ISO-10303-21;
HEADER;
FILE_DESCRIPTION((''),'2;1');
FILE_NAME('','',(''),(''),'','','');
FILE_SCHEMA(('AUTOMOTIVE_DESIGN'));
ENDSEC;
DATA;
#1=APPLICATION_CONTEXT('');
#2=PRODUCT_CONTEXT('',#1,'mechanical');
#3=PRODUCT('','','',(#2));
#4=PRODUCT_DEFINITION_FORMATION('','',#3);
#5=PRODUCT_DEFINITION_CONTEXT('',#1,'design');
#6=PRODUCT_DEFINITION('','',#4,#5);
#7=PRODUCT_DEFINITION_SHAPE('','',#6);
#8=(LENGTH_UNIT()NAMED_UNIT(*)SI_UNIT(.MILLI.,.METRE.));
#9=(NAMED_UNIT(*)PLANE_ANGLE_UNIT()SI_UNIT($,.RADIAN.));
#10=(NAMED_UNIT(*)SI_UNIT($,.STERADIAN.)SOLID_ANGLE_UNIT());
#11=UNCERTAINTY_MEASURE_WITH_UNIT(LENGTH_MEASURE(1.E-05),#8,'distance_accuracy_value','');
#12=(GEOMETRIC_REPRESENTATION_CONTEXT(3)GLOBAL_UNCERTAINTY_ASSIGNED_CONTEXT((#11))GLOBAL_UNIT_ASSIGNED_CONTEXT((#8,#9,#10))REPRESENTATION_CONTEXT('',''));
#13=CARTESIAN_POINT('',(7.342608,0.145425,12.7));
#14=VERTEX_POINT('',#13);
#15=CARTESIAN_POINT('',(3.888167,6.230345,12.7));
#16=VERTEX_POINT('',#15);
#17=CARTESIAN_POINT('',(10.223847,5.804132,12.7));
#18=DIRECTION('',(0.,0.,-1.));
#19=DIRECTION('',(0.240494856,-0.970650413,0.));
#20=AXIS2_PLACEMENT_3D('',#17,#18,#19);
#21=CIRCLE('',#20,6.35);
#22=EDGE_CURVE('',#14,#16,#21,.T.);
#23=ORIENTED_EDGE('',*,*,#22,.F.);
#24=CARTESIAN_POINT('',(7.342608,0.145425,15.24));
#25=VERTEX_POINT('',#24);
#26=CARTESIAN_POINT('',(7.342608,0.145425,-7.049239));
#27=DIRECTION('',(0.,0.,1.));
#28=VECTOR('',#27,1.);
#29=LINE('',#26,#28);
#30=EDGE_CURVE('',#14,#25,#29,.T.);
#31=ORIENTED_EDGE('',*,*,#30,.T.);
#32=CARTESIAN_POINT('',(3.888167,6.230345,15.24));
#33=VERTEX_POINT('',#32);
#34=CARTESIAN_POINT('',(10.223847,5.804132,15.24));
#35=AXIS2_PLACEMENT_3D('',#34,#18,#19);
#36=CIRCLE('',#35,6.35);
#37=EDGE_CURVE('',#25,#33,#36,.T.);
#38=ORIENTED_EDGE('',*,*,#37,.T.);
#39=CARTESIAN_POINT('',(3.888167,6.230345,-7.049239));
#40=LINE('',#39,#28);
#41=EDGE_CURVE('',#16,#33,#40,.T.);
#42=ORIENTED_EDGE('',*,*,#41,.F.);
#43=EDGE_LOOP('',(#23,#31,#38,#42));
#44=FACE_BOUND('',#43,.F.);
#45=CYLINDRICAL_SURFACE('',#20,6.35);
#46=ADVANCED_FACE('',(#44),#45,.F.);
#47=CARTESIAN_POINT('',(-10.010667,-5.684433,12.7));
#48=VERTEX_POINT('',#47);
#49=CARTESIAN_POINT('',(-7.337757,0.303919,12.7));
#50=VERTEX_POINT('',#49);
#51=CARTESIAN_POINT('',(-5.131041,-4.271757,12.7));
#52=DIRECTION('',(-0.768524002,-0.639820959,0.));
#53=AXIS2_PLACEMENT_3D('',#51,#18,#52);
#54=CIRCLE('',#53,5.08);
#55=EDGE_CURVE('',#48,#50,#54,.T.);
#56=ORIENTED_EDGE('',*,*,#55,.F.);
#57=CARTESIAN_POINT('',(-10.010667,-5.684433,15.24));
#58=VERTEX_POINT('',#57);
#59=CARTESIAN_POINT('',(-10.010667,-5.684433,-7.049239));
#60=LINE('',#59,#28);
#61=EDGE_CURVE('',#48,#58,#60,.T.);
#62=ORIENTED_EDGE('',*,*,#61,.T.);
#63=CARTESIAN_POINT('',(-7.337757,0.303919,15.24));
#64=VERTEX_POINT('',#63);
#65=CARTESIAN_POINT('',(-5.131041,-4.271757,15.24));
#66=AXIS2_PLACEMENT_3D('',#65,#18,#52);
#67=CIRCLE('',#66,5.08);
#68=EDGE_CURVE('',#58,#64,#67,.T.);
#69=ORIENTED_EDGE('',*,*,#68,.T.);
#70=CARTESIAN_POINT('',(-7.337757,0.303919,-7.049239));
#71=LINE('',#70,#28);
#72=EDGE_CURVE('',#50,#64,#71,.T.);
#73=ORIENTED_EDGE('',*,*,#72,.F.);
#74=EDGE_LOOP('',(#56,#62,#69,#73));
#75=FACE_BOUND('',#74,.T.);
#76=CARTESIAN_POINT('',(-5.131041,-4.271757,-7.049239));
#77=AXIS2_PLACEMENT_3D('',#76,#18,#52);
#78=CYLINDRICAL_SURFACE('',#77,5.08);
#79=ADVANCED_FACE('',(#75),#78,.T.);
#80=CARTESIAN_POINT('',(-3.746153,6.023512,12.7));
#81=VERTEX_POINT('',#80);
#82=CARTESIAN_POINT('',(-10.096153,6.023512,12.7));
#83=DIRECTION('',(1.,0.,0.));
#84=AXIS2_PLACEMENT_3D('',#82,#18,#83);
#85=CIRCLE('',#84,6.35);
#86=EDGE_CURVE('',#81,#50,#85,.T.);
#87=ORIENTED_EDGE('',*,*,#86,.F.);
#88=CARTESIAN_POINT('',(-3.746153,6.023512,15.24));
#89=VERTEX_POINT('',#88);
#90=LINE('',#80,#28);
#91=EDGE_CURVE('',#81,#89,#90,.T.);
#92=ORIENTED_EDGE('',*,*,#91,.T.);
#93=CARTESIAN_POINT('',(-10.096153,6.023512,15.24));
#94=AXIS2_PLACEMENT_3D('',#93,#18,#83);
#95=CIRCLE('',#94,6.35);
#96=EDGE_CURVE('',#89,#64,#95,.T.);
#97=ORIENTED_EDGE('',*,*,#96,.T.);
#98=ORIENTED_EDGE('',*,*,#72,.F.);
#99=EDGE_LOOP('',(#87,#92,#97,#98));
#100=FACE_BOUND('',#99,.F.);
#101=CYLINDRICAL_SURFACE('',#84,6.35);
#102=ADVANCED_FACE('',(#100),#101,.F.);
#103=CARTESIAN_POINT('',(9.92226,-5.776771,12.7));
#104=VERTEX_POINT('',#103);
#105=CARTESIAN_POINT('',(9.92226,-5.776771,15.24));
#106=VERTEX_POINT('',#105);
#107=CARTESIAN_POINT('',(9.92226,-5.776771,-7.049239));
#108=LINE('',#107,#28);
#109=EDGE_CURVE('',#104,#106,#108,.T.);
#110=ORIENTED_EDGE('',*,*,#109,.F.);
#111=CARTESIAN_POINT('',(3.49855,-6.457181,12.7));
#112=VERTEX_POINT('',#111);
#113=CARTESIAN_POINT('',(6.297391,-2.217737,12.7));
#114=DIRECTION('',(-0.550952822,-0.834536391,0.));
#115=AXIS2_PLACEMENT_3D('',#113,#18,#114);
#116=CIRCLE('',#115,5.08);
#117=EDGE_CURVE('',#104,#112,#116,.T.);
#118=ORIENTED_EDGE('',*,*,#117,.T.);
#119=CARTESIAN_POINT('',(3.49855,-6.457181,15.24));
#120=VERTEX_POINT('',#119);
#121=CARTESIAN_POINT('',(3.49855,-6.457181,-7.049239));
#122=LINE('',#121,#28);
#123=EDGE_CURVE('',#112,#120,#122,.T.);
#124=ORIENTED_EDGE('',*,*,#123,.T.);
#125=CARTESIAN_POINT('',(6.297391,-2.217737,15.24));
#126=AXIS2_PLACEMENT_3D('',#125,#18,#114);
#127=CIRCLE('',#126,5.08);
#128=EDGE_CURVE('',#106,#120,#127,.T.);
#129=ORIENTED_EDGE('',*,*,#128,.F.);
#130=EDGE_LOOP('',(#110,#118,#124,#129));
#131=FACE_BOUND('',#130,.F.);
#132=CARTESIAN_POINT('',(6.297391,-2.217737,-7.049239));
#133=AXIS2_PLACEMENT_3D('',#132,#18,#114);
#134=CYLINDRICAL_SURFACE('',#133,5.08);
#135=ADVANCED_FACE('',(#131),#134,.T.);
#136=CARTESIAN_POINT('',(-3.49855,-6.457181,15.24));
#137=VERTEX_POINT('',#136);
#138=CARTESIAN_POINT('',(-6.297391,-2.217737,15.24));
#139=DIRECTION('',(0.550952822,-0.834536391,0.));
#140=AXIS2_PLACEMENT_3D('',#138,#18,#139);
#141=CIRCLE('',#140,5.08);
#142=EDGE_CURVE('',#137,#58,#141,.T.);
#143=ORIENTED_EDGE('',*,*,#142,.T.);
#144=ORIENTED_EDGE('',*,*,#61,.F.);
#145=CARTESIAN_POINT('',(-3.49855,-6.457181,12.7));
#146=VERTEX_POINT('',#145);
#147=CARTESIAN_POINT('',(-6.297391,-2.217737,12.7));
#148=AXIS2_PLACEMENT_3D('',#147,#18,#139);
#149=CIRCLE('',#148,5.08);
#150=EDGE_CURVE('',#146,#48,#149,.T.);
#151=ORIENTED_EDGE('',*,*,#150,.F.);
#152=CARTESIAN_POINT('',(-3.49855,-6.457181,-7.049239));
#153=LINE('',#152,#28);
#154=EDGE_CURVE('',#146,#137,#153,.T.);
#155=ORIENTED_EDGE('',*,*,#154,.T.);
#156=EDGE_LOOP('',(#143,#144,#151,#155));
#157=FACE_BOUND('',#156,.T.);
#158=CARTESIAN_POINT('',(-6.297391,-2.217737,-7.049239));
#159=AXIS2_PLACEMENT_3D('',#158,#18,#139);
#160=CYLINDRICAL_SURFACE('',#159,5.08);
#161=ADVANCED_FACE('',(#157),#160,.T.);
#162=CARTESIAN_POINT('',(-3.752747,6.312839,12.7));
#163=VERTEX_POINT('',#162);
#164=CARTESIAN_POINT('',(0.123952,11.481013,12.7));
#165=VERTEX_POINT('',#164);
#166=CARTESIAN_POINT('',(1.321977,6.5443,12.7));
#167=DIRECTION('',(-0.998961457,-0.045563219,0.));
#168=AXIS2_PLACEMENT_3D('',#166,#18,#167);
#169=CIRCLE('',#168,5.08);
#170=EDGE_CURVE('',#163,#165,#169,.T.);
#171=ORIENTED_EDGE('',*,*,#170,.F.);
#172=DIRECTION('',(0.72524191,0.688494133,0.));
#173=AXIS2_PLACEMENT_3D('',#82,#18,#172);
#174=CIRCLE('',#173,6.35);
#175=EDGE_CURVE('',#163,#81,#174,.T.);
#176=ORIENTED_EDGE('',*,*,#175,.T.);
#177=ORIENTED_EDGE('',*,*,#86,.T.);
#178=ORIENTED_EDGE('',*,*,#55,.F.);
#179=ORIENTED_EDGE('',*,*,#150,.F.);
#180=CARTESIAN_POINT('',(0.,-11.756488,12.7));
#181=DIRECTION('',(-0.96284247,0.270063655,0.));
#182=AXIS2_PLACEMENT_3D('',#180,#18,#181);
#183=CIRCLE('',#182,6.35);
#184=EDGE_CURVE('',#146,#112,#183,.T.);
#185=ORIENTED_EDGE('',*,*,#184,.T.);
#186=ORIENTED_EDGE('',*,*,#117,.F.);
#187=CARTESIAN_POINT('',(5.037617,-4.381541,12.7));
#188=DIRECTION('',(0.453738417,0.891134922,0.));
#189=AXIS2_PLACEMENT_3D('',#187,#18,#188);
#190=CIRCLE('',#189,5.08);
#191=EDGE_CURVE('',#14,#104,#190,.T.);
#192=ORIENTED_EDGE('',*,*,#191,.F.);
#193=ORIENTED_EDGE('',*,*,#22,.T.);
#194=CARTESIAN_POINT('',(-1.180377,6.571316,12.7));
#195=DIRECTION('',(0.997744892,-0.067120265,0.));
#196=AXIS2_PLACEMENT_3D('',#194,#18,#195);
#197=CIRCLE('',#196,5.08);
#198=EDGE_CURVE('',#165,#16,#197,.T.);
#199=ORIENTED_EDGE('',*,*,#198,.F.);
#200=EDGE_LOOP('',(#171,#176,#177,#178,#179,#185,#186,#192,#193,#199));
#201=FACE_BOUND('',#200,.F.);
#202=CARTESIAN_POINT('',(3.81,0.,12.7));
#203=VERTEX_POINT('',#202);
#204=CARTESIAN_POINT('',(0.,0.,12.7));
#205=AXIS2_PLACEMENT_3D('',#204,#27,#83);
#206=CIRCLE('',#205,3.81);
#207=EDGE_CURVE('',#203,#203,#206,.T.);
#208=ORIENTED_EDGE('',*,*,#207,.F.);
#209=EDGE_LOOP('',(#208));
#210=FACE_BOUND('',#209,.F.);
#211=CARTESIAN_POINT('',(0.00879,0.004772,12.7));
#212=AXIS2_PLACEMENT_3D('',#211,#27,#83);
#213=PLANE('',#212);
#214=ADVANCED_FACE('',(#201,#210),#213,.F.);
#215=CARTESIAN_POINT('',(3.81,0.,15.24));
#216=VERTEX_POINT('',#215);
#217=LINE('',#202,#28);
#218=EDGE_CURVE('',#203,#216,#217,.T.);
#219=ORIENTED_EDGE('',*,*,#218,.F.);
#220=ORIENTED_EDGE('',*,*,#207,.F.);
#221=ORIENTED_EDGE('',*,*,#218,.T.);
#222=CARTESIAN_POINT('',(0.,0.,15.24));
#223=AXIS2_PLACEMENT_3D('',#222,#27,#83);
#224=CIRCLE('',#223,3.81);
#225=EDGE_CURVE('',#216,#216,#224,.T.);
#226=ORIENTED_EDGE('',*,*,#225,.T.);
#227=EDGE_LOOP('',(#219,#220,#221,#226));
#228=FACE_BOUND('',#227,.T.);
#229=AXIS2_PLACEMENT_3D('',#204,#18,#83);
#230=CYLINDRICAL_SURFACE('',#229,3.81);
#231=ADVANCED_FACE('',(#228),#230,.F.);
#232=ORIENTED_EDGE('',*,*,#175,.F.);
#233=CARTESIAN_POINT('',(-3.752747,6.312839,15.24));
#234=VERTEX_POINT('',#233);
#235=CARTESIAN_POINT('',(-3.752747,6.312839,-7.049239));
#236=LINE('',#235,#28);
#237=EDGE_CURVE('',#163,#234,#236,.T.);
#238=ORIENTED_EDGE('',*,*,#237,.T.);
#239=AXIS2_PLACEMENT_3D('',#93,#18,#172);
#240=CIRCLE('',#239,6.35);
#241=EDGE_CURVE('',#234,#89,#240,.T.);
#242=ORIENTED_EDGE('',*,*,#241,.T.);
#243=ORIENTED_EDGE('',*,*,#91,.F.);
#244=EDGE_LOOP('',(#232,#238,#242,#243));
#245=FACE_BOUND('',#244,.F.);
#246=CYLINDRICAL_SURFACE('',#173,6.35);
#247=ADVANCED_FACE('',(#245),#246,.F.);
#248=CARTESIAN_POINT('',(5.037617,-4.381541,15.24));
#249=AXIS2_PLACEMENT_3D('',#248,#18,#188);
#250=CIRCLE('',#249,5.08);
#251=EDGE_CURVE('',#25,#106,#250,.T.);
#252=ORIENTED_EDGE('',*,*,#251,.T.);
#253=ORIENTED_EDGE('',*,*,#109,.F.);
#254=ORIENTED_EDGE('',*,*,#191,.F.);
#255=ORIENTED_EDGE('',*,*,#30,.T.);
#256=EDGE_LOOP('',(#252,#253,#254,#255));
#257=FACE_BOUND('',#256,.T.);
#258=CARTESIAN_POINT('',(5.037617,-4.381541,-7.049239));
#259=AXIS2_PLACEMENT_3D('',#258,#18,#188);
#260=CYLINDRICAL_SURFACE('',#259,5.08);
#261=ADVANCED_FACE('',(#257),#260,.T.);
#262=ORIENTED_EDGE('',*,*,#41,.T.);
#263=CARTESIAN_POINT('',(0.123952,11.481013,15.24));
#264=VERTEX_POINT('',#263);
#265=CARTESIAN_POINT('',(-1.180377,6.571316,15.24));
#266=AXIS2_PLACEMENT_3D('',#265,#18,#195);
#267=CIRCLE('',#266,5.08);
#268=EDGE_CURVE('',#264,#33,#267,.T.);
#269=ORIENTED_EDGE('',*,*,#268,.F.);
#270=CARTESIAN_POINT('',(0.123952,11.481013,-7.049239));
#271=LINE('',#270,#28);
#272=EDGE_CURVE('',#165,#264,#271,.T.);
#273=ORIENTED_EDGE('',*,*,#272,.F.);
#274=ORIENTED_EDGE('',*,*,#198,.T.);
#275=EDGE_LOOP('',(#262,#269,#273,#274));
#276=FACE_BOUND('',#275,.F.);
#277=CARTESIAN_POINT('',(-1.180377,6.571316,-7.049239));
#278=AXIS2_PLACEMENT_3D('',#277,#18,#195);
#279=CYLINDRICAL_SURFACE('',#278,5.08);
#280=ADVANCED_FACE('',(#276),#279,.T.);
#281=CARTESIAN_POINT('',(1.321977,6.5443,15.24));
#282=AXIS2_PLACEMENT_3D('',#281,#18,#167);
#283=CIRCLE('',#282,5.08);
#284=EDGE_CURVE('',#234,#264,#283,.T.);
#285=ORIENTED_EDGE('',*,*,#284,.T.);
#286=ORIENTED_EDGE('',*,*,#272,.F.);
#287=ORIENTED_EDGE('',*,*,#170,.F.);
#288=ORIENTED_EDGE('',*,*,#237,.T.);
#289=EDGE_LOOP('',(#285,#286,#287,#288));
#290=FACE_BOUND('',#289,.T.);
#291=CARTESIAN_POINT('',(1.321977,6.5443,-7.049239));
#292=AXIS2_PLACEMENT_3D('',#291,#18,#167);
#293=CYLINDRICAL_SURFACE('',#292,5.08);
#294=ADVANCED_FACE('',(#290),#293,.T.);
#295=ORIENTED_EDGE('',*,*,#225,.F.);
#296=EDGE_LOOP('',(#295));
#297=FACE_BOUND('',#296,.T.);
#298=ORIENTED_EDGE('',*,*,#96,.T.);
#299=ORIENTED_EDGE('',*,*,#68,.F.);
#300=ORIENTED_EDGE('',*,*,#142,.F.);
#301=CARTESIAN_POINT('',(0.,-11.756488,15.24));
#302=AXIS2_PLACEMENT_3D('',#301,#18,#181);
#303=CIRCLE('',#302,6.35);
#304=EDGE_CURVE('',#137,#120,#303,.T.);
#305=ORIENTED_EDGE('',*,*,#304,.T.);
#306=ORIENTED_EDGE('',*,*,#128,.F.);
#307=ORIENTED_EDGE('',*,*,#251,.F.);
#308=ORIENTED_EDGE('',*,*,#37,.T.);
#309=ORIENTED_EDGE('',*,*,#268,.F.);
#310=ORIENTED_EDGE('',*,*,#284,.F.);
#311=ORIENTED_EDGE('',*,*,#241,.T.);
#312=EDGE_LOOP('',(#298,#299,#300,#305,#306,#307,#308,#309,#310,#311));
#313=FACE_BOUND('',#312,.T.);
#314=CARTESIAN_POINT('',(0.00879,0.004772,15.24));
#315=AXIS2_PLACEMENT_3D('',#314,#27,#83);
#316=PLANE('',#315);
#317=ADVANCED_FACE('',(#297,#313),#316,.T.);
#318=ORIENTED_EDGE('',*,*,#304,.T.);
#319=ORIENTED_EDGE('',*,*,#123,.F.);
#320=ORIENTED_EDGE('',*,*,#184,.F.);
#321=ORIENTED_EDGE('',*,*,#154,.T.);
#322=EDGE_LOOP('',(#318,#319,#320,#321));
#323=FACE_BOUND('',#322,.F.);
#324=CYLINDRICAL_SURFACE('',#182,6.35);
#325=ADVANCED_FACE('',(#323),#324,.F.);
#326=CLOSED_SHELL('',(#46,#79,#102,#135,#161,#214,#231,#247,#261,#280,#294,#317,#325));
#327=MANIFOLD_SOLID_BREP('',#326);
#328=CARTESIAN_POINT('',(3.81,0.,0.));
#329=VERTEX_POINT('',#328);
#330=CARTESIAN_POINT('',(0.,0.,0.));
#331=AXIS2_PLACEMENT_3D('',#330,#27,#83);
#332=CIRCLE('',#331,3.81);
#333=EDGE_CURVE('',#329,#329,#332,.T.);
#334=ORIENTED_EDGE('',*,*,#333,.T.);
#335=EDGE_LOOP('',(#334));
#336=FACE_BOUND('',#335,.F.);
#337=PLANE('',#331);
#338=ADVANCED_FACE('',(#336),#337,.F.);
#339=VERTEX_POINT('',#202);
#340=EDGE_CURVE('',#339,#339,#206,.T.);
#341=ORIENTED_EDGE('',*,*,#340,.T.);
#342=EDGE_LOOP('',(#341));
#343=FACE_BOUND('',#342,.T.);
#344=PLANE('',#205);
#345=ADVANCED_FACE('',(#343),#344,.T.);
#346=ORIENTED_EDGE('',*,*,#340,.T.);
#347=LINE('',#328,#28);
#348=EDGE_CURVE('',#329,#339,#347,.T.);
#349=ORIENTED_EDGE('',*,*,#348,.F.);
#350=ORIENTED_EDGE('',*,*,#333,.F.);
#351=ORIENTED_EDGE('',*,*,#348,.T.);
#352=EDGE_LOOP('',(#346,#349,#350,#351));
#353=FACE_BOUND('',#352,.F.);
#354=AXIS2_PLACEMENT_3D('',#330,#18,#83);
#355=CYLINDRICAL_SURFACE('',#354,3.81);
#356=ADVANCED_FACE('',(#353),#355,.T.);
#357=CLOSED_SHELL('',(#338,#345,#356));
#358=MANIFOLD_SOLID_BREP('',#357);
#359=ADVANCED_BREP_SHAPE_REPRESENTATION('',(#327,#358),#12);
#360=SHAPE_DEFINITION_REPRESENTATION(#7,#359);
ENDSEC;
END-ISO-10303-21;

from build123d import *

# Parameters (mm, degrees)
F0_R        = 3.81
F1_DEPTH    = 12.7
F2_R        = 3.81
F3_DEPTH    = 2.54
F4_T1_DEPTH = 42.0384776465


# Not quite as in the source:
# - a fillet or chamfer that OpenCascade refuses, or shapes differently, is made with other operations: its cross-section is extruded or revolved along the edge and cut away or added


with BuildPart() as f1:
    # F0 (on Top) → F1 (new body)
    with BuildSketch(Plane.XY):
        Circle(F0_R)
    extrude(amount=F1_DEPTH)


with BuildPart() as f3:
    # F2 (on face) → F3 (new body)
    with BuildSketch(Plane.XY.offset(12.7)):
        with BuildLine():
            ThreePointArc((11.7509897523, -0.35949854), (4.7016682053, 2.6691615996), (5.7140252702, 10.274478798))
            ThreePointArc((5.7140252702, 10.274478798), (0.1269192039, 11.7558024343), (-5.4908664559, 10.3954502029))
            ThreePointArc((-5.4908664559, 10.3954502029), (-4.1984383287, 8.3771195895), (-3.7461525862, 6.0235124566))
            ThreePointArc((-3.7461525862, 6.0235124566), (-6.2372414103, 0.980566439), (-11.7560122827, -0.1057098259))
            ThreePointArc((-11.7560122827, -0.1057098259), (-10.2232663206, -5.8051550451), (-6.1140496846, -10.041583332))
            ThreePointArc((-6.1140496846, -10.041583332), (0, -5.4064875434), (6.1140496846, -10.041583332))
            ThreePointArc((6.1140496846, -10.041583332), (10.16, -5.9151837975), (11.7509897523, -0.35949854))
        make_face()
        Circle(F2_R, mode=Mode.SUBTRACT)
    extrude(amount=F3_DEPTH)

    # F4: fillet of radius 5.08 on 6 edges, made by hand

    # F4_s2 → F4_t1 (cut)
    with BuildSketch(Plane.XY.offset(-7.0492388233)):
        with BuildLine():
            ThreePointArc((7.3426084647, 0.1454248286), (10.0242781389, -3.4122038252), (8.8706351528, -7.7153633319))
            ThreePointArc((8.8706351528, -7.7153633319), (10.9471475801, -4.2866022929), (11.7509897523, -0.35949854))
            ThreePointArc((11.7509897523, -0.35949854), (9.5012608724, -0.5046217571), (7.3426084647, 0.1454248286))
        make_face()
        with BuildLine():
            ThreePointArc((3.888167348, 6.230345265), (2.2077692466, 10.3564010208), (-2.0785006989, 11.5712935406))
            ThreePointArc((-2.0785006989, 11.5712935406), (1.9299460735, 11.5969956244), (5.7140252702, 10.274478798))
            ThreePointArc((5.7140252702, 10.274478798), (4.4363623338, 8.4170832554), (3.888167348, 6.230345265))
        make_face()
        with BuildLine():
            ThreePointArc((-3.7527473325, 6.3128388943), (-1.9836590084, 10.4016529498), (2.3278414748, 11.5237213359))
            ThreePointArc((2.3278414748, 11.5237213359), (-1.6791160458, 11.6359601522), (-5.4908664559, 10.3954502029))
            ThreePointArc((-5.4908664559, 10.3954502029), (-4.2536026695, 8.5109027497), (-3.7527473325, 6.3128388943))
        make_face()
        with BuildLine():
            ThreePointArc((-9.0351428515, -7.522047129), (-10.0956113335, -3.1949834043), (-7.337757218, 0.3039185031))
            ThreePointArc((-7.337757218, 0.3039185031), (-9.5099410225, -0.299371063), (-11.7560122827, -0.1057098259))
            ThreePointArc((-11.7560122827, -0.1057098259), (-11.0371440012, -4.0492532221), (-9.0351428515, -7.522047129))
        make_face()
        with BuildLine():
            ThreePointArc((-3.4985504193, -6.4571814602), (-7.9163168625, -7.0328667329), (-11.088943922, -3.9051660725))
            ThreePointArc((-11.088943922, -3.9051660725), (-9.1323409623, -7.4037387789), (-6.1140496846, -10.041583332))
            ThreePointArc((-6.1140496846, -10.041583332), (-5.1295715595, -8.0134946746), (-3.4985504193, -6.4571814602))
        make_face()
        with BuildLine():
            ThreePointArc((3.4985504193, -6.4571814602), (7.9163168625, -7.0328667329), (11.088943922, -3.9051660725))
            ThreePointArc((11.088943922, -3.9051660725), (9.1323409623, -7.4037387789), (6.1140496846, -10.041583332))
            ThreePointArc((6.1140496846, -10.041583332), (5.1295715595, -8.0134946746), (3.4985504193, -6.4571814602))
        make_face()
    extrude(amount=F4_T1_DEPTH, mode=Mode.SUBTRACT)


solid = Compound([f1.part, f3.part])
